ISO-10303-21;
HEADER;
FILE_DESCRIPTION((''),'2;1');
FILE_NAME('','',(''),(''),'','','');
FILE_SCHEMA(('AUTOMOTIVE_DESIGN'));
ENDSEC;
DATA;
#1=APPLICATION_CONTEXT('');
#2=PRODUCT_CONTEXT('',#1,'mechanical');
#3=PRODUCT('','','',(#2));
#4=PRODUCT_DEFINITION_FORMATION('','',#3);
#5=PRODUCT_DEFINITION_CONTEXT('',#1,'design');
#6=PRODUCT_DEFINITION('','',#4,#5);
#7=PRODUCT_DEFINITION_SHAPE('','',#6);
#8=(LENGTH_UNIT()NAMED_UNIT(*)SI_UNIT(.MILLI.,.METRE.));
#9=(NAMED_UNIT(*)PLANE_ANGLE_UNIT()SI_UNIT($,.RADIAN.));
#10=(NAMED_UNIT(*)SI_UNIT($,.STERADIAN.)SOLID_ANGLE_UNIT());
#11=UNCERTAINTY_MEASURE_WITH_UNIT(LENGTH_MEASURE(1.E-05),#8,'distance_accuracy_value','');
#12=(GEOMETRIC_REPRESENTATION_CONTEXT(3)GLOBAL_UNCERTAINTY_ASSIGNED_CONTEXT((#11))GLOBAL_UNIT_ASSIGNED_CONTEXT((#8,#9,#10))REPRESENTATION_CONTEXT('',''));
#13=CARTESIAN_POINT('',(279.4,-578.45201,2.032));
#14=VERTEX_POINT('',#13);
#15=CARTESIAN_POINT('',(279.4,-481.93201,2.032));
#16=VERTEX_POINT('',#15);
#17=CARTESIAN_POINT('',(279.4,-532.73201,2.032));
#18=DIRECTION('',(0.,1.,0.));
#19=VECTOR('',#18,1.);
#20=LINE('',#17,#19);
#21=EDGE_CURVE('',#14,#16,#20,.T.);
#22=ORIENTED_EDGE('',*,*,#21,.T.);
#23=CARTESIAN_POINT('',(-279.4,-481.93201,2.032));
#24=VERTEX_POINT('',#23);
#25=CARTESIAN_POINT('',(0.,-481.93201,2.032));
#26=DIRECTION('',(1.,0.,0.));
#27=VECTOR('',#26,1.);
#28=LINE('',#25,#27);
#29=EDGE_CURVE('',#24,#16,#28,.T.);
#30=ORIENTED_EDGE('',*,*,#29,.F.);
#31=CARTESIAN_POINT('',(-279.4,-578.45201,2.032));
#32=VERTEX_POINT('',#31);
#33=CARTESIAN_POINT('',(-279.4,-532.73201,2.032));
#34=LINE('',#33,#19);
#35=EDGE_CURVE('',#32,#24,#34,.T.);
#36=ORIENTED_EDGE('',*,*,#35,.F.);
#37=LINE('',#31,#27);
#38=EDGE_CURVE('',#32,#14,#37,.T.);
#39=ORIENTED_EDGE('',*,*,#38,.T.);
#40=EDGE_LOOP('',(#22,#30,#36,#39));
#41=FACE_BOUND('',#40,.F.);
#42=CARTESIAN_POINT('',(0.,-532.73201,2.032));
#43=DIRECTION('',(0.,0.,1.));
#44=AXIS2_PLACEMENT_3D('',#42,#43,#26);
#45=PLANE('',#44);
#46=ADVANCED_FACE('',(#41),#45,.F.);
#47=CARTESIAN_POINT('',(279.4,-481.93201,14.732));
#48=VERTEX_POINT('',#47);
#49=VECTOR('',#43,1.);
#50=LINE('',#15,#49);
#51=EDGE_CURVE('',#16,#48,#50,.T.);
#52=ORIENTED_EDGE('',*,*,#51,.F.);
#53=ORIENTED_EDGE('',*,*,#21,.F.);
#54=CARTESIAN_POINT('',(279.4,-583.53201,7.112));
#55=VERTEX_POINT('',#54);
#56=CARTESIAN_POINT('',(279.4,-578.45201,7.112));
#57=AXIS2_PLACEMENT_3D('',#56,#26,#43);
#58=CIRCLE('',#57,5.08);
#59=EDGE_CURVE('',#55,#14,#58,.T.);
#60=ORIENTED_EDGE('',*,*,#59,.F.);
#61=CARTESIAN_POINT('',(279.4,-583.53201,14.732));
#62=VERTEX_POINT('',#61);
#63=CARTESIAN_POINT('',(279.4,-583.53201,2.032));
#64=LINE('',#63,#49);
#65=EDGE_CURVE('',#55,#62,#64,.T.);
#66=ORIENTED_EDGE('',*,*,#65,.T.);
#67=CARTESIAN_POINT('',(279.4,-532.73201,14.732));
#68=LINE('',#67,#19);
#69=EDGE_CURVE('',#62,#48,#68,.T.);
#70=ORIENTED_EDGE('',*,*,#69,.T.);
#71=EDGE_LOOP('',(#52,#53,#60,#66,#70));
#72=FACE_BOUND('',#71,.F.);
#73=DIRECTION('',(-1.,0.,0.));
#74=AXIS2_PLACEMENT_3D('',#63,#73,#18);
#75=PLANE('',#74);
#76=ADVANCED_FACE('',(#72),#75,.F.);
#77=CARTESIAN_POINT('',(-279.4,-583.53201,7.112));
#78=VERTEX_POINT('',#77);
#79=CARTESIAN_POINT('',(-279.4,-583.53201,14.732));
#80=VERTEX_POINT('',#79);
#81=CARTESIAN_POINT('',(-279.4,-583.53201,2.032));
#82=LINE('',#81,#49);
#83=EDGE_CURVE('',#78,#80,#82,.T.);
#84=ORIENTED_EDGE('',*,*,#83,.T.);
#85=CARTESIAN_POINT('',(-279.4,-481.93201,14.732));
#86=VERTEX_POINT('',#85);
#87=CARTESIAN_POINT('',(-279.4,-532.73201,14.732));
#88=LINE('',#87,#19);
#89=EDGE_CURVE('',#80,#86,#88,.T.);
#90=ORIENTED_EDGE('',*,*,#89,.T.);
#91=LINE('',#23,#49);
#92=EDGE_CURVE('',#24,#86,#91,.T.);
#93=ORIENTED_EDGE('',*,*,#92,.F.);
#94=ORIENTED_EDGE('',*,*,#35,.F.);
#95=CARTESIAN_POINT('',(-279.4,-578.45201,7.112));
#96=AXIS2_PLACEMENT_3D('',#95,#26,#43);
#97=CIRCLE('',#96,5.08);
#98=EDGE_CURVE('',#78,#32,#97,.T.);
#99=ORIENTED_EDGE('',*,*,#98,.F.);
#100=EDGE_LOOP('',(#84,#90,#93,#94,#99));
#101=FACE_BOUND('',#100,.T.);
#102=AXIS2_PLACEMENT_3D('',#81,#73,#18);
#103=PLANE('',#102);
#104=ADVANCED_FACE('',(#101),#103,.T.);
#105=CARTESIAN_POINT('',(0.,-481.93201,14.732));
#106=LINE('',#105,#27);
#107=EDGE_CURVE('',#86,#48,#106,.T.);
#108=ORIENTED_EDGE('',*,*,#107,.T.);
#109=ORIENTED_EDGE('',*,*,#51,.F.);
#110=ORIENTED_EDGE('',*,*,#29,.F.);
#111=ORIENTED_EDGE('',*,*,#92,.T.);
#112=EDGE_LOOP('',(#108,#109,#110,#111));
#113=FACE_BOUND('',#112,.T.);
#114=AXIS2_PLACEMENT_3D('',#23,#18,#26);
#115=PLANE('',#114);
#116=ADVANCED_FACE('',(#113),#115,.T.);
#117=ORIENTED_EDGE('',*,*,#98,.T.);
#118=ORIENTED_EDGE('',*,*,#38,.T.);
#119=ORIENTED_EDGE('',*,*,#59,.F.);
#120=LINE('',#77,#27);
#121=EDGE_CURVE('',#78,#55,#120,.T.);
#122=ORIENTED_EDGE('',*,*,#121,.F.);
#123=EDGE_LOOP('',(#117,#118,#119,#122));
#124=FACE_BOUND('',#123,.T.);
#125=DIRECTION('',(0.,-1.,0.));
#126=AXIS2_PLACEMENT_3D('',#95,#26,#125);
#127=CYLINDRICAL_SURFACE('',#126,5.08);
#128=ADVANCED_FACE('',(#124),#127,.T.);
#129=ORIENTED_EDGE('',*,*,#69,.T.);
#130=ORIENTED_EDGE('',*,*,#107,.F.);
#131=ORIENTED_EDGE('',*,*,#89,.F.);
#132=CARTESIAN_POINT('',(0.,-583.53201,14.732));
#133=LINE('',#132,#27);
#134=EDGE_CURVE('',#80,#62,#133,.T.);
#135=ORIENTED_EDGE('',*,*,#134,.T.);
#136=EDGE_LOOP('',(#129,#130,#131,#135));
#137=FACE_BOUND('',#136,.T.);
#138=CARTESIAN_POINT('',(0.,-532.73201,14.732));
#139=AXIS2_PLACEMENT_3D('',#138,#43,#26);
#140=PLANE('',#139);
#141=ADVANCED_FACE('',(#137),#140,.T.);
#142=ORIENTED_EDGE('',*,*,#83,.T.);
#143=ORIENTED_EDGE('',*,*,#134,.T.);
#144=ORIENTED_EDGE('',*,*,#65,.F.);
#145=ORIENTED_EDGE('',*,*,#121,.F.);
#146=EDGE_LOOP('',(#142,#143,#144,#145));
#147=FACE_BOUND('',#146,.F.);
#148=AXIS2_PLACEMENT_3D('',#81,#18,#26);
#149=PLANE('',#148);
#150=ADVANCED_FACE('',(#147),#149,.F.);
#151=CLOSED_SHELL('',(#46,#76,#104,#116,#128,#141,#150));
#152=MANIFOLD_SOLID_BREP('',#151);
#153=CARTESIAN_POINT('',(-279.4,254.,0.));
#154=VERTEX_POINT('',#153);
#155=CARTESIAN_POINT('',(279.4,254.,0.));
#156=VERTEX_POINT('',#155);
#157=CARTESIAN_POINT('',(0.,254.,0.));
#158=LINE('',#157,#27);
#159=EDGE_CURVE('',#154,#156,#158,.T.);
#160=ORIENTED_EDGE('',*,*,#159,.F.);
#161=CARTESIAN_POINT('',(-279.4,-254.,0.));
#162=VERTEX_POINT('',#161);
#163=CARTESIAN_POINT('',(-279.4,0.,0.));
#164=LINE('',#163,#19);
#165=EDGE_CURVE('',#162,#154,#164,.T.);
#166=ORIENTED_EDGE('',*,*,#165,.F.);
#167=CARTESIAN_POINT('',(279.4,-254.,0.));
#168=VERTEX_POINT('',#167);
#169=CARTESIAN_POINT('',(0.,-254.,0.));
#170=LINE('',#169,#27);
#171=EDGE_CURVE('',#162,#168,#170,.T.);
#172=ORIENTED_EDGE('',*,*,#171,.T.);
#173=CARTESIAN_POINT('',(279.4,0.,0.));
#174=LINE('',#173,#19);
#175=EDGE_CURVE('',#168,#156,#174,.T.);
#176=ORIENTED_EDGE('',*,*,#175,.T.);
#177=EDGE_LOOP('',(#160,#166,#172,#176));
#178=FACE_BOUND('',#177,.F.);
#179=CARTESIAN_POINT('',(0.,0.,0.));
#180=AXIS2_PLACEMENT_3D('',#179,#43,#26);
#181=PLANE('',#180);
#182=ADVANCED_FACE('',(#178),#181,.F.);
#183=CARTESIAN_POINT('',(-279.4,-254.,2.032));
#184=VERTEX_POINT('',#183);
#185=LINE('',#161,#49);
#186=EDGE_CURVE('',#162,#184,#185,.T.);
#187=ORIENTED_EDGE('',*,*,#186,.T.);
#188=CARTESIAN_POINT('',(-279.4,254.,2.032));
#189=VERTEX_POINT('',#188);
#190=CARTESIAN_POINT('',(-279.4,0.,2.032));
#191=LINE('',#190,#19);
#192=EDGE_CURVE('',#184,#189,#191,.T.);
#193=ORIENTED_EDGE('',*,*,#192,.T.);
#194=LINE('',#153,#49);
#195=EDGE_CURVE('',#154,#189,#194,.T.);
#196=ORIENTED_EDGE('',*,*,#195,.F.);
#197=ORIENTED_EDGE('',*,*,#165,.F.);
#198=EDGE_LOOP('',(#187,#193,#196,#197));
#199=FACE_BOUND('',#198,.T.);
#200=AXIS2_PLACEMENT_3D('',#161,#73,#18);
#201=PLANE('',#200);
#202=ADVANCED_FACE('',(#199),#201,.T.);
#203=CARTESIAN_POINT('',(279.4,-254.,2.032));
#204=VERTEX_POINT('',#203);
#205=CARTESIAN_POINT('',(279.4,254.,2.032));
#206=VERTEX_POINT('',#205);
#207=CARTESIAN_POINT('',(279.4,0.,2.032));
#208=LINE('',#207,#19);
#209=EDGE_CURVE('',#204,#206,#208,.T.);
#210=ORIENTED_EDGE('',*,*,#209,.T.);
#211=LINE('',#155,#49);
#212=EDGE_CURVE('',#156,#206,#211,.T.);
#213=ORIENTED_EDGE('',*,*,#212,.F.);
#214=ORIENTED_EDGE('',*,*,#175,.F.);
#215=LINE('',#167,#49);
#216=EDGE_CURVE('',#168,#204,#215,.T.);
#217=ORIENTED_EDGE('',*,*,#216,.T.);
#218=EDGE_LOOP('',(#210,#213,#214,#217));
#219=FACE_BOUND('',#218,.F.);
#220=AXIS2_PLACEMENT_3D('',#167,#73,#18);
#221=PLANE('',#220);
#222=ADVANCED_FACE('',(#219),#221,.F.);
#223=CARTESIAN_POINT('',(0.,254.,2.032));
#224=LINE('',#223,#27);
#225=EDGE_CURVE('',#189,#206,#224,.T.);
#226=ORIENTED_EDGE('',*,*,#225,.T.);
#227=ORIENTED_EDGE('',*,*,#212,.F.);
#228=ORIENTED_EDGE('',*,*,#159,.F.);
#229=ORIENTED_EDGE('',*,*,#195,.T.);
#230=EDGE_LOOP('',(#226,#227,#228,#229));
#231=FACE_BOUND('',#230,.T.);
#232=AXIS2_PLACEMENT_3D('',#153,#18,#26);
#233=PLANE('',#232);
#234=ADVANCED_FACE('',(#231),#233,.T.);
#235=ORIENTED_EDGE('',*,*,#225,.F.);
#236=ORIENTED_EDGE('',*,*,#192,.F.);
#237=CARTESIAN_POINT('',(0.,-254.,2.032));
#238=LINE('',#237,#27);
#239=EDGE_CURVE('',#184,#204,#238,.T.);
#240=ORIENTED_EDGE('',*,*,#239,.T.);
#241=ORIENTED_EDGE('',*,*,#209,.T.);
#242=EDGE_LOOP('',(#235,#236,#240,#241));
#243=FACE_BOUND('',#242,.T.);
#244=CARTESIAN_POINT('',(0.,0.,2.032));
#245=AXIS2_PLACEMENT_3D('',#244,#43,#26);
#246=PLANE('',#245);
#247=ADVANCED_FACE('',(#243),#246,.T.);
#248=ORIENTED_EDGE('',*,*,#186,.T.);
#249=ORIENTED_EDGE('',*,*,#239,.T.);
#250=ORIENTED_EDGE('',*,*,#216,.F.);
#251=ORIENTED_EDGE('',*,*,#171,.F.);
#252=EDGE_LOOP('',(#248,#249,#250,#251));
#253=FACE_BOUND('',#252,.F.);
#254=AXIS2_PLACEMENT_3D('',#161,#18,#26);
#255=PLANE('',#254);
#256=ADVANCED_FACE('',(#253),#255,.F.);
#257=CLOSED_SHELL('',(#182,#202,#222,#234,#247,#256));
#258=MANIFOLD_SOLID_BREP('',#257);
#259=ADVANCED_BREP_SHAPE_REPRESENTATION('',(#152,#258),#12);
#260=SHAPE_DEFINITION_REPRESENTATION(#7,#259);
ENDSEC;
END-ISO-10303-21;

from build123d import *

# Parameters (mm, degrees)
F0_W     = 558.8
F0_H     = 508
F1_DEPTH = 2.032
F2_W     = 558.8
F2_H     = 101.6
F3_DEPTH = 12.7
F4_R     = 5.08


# Not quite as in the source:
# - a length typed as a fraction of an inch, garbled in the dataset ("3 / 203.2 mm" for 3/8 in), is restored


with BuildPart() as f1:
    # F0 (on Top) → F1 (new body)
    with BuildSketch(Plane.XY):
        Rectangle(F0_W, F0_H)
    extrude(amount=F1_DEPTH)


with BuildPart() as f3:
    # F2 (on face) → F3 (new body)
    with BuildSketch(Plane.XY.offset(2.032)):
        with Locations((0, -532.7320098877)):
            Rectangle(F2_W, F2_H)
    extrude(amount=F3_DEPTH)

    # F4
    f4_edges = [f3.edges().sort_by_distance(p)[0] for p in [
        (0, -583.53201, 2.032),
    ]]
    fillet(f4_edges, radius=F4_R)


solid = Compound([f1.part, f3.part])
